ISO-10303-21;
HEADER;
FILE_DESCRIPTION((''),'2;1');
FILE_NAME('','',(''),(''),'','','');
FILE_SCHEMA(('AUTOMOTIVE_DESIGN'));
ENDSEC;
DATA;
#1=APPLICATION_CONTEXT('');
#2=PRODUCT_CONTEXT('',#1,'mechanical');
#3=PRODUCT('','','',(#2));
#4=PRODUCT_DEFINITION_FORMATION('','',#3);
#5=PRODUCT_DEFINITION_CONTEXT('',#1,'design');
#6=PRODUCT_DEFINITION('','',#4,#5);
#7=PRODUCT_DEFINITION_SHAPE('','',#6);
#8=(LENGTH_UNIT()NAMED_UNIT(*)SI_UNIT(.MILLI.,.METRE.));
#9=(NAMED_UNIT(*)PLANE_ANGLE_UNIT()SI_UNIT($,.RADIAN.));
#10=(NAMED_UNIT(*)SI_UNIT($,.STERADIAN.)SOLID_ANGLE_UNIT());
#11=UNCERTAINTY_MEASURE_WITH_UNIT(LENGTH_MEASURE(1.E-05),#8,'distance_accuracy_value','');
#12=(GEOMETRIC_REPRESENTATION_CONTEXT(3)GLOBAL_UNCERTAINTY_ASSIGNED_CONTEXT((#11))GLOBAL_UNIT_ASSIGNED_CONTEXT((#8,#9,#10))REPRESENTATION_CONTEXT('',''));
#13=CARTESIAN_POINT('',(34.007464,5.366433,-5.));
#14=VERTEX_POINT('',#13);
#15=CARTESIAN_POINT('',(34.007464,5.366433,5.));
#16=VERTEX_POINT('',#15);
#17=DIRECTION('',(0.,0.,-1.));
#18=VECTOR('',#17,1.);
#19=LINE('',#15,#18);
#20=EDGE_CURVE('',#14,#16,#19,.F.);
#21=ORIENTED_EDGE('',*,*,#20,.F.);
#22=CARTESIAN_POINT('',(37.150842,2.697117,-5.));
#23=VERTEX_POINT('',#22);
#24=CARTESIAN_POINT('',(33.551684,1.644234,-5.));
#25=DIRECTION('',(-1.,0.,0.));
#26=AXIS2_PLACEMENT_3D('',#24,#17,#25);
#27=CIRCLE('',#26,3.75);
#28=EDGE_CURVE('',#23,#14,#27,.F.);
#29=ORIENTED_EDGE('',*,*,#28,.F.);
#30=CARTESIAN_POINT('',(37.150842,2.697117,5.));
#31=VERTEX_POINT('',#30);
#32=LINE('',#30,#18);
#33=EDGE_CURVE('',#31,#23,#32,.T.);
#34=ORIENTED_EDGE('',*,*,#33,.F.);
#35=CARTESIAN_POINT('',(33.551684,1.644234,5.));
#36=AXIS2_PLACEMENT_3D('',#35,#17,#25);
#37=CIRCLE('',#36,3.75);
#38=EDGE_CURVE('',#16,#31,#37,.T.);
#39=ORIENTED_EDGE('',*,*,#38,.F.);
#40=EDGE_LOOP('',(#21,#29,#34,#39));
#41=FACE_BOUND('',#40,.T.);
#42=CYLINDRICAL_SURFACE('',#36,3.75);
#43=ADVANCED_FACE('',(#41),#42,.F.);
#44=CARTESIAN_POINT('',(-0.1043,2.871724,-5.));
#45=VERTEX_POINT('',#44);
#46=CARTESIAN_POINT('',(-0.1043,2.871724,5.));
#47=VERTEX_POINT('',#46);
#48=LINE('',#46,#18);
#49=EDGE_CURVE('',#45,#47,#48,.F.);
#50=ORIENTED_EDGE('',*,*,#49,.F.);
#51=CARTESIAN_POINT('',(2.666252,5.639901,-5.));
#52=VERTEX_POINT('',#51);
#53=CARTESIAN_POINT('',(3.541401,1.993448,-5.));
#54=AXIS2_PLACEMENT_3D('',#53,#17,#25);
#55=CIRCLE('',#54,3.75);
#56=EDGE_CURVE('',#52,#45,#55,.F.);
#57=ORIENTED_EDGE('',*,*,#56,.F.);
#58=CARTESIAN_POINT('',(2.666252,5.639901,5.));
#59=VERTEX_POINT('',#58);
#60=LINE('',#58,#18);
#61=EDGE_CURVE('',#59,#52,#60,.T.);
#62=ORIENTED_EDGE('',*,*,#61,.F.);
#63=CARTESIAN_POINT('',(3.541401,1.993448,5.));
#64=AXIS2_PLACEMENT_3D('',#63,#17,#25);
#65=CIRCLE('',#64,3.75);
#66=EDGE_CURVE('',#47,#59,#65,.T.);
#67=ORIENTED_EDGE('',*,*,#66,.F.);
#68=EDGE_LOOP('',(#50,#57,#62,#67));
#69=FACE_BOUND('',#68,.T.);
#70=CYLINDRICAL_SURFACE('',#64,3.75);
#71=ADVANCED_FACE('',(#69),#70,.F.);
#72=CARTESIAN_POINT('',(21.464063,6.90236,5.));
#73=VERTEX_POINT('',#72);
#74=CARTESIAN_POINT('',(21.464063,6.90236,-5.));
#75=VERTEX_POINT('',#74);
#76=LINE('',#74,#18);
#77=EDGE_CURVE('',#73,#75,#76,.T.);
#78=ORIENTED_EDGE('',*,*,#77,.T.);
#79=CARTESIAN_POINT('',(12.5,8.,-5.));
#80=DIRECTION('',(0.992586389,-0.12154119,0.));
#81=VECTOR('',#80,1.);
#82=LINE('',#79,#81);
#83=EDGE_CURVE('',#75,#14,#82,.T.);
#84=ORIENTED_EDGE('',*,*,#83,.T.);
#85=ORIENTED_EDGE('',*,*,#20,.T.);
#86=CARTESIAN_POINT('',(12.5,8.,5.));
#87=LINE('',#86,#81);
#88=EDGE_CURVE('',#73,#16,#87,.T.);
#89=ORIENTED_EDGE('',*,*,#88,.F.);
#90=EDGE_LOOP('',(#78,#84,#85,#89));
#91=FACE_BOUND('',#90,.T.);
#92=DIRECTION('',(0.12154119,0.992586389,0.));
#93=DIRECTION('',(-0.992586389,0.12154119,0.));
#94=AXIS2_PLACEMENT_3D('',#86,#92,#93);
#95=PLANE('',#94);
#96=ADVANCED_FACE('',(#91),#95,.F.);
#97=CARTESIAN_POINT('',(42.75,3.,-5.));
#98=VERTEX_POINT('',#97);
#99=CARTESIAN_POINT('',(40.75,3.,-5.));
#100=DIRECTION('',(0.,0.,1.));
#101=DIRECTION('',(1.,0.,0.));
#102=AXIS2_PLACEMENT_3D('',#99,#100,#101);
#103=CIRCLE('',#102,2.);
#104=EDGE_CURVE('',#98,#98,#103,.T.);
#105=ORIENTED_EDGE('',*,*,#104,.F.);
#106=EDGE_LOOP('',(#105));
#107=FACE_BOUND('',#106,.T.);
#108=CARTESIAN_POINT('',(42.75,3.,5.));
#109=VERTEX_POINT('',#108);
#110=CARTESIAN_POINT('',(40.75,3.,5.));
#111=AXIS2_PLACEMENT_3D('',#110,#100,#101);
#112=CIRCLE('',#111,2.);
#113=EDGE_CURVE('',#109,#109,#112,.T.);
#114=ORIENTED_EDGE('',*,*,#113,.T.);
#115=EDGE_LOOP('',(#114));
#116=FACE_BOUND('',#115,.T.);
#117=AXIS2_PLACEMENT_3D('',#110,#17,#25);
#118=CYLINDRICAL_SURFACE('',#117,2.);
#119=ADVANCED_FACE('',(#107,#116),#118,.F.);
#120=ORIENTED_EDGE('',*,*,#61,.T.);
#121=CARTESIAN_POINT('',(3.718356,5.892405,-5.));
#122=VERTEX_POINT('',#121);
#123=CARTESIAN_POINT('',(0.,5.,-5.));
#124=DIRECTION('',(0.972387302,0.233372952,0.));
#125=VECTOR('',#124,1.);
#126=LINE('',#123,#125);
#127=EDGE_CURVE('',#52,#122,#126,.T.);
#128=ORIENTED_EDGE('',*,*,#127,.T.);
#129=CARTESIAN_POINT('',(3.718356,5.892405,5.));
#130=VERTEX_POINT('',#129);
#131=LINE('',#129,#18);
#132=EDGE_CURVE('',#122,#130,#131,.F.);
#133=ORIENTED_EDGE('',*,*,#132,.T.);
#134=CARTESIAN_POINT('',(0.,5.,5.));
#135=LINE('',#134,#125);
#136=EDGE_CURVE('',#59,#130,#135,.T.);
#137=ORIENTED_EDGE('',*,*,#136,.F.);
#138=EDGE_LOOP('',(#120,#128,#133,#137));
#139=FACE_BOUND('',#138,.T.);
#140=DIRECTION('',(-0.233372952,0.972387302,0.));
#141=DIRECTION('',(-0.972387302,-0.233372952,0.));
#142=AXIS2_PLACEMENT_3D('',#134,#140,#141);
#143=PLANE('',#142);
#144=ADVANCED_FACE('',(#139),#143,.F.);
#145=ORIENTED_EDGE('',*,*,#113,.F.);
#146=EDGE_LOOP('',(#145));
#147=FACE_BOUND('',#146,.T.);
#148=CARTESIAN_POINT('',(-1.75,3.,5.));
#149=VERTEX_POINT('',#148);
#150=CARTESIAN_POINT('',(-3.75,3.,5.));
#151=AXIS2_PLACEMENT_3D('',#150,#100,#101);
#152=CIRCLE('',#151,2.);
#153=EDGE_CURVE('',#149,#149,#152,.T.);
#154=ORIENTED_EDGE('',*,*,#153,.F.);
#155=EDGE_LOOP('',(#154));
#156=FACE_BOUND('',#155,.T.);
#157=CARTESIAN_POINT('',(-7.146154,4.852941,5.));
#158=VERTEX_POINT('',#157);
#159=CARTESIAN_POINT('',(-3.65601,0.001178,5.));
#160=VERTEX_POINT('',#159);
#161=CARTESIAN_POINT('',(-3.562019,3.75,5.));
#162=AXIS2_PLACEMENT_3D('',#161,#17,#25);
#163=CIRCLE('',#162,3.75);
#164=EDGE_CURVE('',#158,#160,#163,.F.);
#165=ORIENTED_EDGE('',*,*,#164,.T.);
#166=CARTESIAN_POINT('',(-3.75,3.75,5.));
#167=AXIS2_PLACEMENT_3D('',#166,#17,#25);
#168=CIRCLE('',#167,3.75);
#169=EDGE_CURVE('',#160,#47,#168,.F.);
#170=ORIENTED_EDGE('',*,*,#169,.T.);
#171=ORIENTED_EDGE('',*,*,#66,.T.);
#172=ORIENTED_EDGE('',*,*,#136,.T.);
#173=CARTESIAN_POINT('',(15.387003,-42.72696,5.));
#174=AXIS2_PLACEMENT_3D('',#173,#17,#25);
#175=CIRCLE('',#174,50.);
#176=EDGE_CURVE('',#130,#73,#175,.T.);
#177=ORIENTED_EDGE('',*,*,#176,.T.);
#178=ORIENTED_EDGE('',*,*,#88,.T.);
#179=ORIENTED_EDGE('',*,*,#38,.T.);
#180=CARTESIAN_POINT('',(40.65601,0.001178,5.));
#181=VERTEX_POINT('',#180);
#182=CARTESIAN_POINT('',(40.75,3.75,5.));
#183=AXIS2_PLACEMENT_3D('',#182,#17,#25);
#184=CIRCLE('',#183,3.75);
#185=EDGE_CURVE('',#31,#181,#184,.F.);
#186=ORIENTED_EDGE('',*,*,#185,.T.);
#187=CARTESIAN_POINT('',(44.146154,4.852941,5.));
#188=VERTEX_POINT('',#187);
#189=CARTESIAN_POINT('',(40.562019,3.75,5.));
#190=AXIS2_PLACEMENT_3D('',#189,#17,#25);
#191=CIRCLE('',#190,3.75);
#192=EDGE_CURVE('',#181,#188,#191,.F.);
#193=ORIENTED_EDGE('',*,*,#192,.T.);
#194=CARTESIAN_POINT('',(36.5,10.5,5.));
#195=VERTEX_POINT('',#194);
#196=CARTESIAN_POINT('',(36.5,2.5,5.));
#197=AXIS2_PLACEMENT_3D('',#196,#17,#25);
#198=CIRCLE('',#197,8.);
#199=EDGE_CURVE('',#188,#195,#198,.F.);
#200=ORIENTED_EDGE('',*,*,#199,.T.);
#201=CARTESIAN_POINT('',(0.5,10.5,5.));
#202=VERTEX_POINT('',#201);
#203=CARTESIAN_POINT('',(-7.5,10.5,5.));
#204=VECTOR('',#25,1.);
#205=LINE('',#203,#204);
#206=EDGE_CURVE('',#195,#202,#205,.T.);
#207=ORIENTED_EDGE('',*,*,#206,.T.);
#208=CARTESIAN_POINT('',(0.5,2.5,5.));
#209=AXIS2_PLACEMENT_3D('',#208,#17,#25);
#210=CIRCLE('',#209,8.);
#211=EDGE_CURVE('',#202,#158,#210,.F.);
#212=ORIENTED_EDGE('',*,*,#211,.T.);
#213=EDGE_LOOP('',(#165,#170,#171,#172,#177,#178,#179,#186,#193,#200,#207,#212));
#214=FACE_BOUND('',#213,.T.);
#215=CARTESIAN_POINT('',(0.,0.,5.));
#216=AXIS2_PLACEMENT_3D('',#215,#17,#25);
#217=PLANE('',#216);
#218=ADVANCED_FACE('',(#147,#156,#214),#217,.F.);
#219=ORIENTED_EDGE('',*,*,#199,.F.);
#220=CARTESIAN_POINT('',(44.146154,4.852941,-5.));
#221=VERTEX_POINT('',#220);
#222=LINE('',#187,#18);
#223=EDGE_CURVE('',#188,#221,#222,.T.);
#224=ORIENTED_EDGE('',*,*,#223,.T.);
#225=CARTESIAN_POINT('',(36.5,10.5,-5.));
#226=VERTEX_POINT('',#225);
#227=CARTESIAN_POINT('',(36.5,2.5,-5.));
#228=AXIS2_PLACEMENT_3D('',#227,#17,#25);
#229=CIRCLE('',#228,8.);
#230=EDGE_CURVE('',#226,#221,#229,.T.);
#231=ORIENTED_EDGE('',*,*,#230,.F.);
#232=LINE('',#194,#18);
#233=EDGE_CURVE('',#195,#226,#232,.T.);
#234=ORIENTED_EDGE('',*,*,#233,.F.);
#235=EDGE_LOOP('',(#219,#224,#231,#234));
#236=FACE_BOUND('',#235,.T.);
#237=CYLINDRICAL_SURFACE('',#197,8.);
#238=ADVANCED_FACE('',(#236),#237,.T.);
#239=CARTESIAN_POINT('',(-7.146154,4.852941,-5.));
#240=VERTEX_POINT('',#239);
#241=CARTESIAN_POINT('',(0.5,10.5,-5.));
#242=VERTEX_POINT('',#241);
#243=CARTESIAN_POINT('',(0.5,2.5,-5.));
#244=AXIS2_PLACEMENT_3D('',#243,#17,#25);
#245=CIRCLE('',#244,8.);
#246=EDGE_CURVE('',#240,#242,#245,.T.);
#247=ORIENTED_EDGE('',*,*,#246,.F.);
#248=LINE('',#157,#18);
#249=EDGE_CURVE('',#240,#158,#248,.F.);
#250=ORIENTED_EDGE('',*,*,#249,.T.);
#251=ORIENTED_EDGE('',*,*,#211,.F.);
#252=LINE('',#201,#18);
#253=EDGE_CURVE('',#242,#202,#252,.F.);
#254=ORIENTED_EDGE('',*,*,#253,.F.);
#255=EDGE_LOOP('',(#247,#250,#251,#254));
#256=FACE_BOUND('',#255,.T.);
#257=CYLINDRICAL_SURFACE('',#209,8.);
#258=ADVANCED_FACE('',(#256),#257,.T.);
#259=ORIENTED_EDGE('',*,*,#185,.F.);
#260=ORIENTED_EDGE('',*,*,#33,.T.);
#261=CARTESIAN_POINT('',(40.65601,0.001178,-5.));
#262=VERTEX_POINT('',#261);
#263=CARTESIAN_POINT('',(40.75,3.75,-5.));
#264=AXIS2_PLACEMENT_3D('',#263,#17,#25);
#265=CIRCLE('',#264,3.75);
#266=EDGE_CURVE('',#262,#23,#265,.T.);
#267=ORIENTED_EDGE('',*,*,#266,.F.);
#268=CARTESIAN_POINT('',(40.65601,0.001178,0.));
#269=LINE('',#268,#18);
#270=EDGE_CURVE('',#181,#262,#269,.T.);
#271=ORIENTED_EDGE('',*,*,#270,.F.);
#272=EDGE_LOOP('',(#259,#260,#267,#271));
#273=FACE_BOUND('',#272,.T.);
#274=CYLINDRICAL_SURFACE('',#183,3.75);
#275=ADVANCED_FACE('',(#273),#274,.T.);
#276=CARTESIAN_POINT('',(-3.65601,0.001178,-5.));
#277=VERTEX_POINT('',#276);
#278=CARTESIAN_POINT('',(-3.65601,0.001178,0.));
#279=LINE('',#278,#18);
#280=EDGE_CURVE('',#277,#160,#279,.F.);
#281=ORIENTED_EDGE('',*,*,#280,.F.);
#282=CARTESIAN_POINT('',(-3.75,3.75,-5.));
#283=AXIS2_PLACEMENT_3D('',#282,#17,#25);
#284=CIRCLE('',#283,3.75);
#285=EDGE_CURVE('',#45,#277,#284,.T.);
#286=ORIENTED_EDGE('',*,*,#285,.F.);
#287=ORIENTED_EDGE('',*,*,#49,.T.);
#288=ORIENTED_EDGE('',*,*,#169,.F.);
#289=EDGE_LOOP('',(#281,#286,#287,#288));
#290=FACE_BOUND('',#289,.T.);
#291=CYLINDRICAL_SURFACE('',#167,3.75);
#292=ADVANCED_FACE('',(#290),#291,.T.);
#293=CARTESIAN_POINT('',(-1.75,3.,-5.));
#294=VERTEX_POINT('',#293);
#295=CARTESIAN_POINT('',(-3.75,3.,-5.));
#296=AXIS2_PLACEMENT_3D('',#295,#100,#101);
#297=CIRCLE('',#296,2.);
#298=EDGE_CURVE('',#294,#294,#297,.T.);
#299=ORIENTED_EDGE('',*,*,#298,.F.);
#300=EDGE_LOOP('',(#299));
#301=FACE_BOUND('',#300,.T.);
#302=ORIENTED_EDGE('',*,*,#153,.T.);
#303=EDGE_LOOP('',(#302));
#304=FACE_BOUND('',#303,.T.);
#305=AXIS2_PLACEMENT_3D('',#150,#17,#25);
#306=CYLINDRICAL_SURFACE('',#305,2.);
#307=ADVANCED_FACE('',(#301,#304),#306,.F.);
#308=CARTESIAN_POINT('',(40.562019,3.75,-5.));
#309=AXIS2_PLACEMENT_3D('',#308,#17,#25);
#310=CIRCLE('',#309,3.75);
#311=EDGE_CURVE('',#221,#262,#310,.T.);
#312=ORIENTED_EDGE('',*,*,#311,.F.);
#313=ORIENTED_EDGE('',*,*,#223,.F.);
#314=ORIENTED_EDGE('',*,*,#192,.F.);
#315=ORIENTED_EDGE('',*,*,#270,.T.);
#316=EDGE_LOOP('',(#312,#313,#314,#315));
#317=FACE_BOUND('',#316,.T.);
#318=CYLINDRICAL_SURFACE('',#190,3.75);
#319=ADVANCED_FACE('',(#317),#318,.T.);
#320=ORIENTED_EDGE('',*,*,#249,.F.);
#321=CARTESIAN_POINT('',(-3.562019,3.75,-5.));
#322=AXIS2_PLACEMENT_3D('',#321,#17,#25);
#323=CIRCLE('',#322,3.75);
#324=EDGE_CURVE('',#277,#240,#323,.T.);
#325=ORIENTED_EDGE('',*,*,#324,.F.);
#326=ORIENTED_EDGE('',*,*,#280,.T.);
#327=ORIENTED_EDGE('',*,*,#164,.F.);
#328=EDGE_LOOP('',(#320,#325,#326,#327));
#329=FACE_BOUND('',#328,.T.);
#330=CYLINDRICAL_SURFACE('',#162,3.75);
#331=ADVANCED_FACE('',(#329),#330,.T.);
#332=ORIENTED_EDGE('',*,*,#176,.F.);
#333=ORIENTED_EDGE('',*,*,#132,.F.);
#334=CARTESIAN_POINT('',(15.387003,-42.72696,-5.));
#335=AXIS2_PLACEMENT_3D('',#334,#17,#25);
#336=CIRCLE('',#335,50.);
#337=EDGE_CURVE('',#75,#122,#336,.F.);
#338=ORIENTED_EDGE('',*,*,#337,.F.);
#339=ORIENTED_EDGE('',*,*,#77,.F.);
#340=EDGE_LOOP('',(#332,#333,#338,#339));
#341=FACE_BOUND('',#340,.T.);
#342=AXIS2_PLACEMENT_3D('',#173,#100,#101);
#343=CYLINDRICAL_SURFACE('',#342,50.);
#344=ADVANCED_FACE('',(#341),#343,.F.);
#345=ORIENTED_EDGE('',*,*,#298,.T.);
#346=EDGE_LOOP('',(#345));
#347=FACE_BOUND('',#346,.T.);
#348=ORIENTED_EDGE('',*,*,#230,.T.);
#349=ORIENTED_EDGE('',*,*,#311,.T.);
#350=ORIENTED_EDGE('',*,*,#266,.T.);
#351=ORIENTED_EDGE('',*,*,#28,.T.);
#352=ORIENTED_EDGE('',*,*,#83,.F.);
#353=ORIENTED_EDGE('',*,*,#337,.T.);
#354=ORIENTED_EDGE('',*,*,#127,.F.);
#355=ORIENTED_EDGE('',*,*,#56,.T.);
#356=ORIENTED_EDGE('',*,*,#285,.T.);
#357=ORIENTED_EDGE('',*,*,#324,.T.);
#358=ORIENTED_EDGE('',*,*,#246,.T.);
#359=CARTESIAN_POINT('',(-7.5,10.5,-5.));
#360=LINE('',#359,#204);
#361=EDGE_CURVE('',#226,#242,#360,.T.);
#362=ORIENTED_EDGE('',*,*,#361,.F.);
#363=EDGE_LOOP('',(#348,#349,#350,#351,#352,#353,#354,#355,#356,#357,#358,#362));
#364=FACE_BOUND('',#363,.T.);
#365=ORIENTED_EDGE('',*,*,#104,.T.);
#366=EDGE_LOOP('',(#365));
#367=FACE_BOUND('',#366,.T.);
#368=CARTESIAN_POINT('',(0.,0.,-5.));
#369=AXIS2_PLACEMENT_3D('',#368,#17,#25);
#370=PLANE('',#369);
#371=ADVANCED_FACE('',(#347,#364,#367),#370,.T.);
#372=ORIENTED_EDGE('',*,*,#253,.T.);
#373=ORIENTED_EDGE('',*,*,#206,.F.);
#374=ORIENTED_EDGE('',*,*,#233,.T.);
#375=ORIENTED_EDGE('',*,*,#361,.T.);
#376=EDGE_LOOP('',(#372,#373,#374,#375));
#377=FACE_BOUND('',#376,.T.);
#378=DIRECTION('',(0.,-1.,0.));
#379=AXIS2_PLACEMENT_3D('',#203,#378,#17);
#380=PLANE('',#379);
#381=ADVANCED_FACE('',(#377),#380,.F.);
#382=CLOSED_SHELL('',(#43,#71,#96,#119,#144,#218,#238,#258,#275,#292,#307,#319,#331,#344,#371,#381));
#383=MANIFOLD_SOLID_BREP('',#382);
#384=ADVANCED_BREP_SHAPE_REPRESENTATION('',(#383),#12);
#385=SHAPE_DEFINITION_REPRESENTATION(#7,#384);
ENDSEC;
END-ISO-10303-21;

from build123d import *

# Parameters (mm, degrees)
SKETCH1_R           = 2
BOSS_EXTRUDE1_DEPTH = 5
FILLET1_R           = 50
FILLET2_R           = 8
FILLET3_R           = 3.75
FILLET4_R           = 3.75


with BuildPart() as part:
    # Sketch1 → Boss-Extrude1 (new, symmetric)
    with BuildSketch(Plane.XY):
        Polygon((0, 0), (-7.5, 0), (-7.5, 8), (-7.5, 10.5), (44.5, 10.5), (44.5, 8), (44.5, 0), (37, 0), (37, 5), (12.5, 8), (0, 5), align=None)
        with Locations((-3.75, 3)):
            Circle(SKETCH1_R, mode=Mode.SUBTRACT)
        with Locations((40.75, 3)):
            Circle(SKETCH1_R, mode=Mode.SUBTRACT)
    extrude(amount=BOSS_EXTRUDE1_DEPTH, both=True)

    # Fillet1
    fillet1_edges = [part.edges().sort_by_distance(p)[0] for p in [
        (12.5, 8, 0),
    ]]
    fillet(fillet1_edges, radius=FILLET1_R)

    # Fillet2
    fillet2_edges = [part.edges().sort_by_distance(p)[0] for p in [
        (-7.5, 10.5, 0),
        (44.5, 10.5, 0),
    ]]
    fillet(fillet2_edges, radius=FILLET2_R)

    # Fillet3
    # the kernel refuses this fillet: 3.75 mm, written as the material it takes off along each edge
    with BuildSketch(Plane(origin=(44.5, 0, 17.164560514), x_dir=(-0.0727207133761252, 0.997352343881573, 0), z_dir=(0, 0, -1))) as fillet3_piece_1:
        with BuildLine():
            CenterArc((4.026444062, -3.654851704), FILLET3_R, 77.065635914, 107.104635177)
            Line((0.286372773, -3.927554379), (-0.087634356, -3.954824646))
            Line((-0.087634356, -3.954824646), (-0.374007129, -0.027270268))
            Line((-0.374007129, -0.027270268), (-0.027270268, 0.374007129))
            ThreePointArc((-0.027270268, 0.374007129), (2.466110592, 0.555808912), (4.94976222, 0.36548517))
            Line((4.94976222, 0.36548517), (4.865824206, 0))
        make_face()
    extrude(amount=34.329121028, mode=Mode.SUBTRACT)
    with BuildSketch(Plane(origin=(37, 0, 14.375), x_dir=(1, 0, 0), z_dir=(0, 0, -1)), Plane(origin=(0, 0, -14.375), x_dir=(-1, 0, 0), z_dir=(0, 0, 1))) as fillet3_piece_2:
        with BuildLine():
            CenterArc((FILLET3_R, -FILLET3_R), FILLET3_R, 90, 90)
            Line((0, -FILLET3_R), (0, 0))
            Line((0, 0), (FILLET3_R, 0))
        make_face()
    extrude(amount=28.75, mode=Mode.SUBTRACT)
    with BuildSketch(Plane(origin=(-7.5, 0, 17.164560514), x_dir=(0.07272071337612518, 0.997352343881573, 0), z_dir=(0, 0, -1))) as fillet3_piece_3:
        with BuildLine():
            CenterArc((4.026444062, 3.654851704), FILLET3_R, 175.829728909, 107.104635177)
            Line((0.286372773, 3.927554379), (-0.087634356, 3.954824646))
            Line((-0.087634356, 3.954824646), (-0.374007129, 0.027270268))
            Line((-0.374007129, 0.027270268), (-0.027270268, -0.374007129))
            ThreePointArc((-0.027270268, -0.374007129), (2.466110592, -0.555808912), (4.94976222, -0.36548517))
            Line((4.94976222, -0.36548517), (4.865824206, 0))
        make_face()
    extrude(amount=34.329121028, mode=Mode.SUBTRACT)

    # Fillet4
    fillet4_edges = [part.edges().sort_by_distance(p)[0] for p in [
        (0, 5, 0),
        (37, 5, 0),
    ]]
    fillet(fillet4_edges, radius=FILLET4_R)


solid = part.part
